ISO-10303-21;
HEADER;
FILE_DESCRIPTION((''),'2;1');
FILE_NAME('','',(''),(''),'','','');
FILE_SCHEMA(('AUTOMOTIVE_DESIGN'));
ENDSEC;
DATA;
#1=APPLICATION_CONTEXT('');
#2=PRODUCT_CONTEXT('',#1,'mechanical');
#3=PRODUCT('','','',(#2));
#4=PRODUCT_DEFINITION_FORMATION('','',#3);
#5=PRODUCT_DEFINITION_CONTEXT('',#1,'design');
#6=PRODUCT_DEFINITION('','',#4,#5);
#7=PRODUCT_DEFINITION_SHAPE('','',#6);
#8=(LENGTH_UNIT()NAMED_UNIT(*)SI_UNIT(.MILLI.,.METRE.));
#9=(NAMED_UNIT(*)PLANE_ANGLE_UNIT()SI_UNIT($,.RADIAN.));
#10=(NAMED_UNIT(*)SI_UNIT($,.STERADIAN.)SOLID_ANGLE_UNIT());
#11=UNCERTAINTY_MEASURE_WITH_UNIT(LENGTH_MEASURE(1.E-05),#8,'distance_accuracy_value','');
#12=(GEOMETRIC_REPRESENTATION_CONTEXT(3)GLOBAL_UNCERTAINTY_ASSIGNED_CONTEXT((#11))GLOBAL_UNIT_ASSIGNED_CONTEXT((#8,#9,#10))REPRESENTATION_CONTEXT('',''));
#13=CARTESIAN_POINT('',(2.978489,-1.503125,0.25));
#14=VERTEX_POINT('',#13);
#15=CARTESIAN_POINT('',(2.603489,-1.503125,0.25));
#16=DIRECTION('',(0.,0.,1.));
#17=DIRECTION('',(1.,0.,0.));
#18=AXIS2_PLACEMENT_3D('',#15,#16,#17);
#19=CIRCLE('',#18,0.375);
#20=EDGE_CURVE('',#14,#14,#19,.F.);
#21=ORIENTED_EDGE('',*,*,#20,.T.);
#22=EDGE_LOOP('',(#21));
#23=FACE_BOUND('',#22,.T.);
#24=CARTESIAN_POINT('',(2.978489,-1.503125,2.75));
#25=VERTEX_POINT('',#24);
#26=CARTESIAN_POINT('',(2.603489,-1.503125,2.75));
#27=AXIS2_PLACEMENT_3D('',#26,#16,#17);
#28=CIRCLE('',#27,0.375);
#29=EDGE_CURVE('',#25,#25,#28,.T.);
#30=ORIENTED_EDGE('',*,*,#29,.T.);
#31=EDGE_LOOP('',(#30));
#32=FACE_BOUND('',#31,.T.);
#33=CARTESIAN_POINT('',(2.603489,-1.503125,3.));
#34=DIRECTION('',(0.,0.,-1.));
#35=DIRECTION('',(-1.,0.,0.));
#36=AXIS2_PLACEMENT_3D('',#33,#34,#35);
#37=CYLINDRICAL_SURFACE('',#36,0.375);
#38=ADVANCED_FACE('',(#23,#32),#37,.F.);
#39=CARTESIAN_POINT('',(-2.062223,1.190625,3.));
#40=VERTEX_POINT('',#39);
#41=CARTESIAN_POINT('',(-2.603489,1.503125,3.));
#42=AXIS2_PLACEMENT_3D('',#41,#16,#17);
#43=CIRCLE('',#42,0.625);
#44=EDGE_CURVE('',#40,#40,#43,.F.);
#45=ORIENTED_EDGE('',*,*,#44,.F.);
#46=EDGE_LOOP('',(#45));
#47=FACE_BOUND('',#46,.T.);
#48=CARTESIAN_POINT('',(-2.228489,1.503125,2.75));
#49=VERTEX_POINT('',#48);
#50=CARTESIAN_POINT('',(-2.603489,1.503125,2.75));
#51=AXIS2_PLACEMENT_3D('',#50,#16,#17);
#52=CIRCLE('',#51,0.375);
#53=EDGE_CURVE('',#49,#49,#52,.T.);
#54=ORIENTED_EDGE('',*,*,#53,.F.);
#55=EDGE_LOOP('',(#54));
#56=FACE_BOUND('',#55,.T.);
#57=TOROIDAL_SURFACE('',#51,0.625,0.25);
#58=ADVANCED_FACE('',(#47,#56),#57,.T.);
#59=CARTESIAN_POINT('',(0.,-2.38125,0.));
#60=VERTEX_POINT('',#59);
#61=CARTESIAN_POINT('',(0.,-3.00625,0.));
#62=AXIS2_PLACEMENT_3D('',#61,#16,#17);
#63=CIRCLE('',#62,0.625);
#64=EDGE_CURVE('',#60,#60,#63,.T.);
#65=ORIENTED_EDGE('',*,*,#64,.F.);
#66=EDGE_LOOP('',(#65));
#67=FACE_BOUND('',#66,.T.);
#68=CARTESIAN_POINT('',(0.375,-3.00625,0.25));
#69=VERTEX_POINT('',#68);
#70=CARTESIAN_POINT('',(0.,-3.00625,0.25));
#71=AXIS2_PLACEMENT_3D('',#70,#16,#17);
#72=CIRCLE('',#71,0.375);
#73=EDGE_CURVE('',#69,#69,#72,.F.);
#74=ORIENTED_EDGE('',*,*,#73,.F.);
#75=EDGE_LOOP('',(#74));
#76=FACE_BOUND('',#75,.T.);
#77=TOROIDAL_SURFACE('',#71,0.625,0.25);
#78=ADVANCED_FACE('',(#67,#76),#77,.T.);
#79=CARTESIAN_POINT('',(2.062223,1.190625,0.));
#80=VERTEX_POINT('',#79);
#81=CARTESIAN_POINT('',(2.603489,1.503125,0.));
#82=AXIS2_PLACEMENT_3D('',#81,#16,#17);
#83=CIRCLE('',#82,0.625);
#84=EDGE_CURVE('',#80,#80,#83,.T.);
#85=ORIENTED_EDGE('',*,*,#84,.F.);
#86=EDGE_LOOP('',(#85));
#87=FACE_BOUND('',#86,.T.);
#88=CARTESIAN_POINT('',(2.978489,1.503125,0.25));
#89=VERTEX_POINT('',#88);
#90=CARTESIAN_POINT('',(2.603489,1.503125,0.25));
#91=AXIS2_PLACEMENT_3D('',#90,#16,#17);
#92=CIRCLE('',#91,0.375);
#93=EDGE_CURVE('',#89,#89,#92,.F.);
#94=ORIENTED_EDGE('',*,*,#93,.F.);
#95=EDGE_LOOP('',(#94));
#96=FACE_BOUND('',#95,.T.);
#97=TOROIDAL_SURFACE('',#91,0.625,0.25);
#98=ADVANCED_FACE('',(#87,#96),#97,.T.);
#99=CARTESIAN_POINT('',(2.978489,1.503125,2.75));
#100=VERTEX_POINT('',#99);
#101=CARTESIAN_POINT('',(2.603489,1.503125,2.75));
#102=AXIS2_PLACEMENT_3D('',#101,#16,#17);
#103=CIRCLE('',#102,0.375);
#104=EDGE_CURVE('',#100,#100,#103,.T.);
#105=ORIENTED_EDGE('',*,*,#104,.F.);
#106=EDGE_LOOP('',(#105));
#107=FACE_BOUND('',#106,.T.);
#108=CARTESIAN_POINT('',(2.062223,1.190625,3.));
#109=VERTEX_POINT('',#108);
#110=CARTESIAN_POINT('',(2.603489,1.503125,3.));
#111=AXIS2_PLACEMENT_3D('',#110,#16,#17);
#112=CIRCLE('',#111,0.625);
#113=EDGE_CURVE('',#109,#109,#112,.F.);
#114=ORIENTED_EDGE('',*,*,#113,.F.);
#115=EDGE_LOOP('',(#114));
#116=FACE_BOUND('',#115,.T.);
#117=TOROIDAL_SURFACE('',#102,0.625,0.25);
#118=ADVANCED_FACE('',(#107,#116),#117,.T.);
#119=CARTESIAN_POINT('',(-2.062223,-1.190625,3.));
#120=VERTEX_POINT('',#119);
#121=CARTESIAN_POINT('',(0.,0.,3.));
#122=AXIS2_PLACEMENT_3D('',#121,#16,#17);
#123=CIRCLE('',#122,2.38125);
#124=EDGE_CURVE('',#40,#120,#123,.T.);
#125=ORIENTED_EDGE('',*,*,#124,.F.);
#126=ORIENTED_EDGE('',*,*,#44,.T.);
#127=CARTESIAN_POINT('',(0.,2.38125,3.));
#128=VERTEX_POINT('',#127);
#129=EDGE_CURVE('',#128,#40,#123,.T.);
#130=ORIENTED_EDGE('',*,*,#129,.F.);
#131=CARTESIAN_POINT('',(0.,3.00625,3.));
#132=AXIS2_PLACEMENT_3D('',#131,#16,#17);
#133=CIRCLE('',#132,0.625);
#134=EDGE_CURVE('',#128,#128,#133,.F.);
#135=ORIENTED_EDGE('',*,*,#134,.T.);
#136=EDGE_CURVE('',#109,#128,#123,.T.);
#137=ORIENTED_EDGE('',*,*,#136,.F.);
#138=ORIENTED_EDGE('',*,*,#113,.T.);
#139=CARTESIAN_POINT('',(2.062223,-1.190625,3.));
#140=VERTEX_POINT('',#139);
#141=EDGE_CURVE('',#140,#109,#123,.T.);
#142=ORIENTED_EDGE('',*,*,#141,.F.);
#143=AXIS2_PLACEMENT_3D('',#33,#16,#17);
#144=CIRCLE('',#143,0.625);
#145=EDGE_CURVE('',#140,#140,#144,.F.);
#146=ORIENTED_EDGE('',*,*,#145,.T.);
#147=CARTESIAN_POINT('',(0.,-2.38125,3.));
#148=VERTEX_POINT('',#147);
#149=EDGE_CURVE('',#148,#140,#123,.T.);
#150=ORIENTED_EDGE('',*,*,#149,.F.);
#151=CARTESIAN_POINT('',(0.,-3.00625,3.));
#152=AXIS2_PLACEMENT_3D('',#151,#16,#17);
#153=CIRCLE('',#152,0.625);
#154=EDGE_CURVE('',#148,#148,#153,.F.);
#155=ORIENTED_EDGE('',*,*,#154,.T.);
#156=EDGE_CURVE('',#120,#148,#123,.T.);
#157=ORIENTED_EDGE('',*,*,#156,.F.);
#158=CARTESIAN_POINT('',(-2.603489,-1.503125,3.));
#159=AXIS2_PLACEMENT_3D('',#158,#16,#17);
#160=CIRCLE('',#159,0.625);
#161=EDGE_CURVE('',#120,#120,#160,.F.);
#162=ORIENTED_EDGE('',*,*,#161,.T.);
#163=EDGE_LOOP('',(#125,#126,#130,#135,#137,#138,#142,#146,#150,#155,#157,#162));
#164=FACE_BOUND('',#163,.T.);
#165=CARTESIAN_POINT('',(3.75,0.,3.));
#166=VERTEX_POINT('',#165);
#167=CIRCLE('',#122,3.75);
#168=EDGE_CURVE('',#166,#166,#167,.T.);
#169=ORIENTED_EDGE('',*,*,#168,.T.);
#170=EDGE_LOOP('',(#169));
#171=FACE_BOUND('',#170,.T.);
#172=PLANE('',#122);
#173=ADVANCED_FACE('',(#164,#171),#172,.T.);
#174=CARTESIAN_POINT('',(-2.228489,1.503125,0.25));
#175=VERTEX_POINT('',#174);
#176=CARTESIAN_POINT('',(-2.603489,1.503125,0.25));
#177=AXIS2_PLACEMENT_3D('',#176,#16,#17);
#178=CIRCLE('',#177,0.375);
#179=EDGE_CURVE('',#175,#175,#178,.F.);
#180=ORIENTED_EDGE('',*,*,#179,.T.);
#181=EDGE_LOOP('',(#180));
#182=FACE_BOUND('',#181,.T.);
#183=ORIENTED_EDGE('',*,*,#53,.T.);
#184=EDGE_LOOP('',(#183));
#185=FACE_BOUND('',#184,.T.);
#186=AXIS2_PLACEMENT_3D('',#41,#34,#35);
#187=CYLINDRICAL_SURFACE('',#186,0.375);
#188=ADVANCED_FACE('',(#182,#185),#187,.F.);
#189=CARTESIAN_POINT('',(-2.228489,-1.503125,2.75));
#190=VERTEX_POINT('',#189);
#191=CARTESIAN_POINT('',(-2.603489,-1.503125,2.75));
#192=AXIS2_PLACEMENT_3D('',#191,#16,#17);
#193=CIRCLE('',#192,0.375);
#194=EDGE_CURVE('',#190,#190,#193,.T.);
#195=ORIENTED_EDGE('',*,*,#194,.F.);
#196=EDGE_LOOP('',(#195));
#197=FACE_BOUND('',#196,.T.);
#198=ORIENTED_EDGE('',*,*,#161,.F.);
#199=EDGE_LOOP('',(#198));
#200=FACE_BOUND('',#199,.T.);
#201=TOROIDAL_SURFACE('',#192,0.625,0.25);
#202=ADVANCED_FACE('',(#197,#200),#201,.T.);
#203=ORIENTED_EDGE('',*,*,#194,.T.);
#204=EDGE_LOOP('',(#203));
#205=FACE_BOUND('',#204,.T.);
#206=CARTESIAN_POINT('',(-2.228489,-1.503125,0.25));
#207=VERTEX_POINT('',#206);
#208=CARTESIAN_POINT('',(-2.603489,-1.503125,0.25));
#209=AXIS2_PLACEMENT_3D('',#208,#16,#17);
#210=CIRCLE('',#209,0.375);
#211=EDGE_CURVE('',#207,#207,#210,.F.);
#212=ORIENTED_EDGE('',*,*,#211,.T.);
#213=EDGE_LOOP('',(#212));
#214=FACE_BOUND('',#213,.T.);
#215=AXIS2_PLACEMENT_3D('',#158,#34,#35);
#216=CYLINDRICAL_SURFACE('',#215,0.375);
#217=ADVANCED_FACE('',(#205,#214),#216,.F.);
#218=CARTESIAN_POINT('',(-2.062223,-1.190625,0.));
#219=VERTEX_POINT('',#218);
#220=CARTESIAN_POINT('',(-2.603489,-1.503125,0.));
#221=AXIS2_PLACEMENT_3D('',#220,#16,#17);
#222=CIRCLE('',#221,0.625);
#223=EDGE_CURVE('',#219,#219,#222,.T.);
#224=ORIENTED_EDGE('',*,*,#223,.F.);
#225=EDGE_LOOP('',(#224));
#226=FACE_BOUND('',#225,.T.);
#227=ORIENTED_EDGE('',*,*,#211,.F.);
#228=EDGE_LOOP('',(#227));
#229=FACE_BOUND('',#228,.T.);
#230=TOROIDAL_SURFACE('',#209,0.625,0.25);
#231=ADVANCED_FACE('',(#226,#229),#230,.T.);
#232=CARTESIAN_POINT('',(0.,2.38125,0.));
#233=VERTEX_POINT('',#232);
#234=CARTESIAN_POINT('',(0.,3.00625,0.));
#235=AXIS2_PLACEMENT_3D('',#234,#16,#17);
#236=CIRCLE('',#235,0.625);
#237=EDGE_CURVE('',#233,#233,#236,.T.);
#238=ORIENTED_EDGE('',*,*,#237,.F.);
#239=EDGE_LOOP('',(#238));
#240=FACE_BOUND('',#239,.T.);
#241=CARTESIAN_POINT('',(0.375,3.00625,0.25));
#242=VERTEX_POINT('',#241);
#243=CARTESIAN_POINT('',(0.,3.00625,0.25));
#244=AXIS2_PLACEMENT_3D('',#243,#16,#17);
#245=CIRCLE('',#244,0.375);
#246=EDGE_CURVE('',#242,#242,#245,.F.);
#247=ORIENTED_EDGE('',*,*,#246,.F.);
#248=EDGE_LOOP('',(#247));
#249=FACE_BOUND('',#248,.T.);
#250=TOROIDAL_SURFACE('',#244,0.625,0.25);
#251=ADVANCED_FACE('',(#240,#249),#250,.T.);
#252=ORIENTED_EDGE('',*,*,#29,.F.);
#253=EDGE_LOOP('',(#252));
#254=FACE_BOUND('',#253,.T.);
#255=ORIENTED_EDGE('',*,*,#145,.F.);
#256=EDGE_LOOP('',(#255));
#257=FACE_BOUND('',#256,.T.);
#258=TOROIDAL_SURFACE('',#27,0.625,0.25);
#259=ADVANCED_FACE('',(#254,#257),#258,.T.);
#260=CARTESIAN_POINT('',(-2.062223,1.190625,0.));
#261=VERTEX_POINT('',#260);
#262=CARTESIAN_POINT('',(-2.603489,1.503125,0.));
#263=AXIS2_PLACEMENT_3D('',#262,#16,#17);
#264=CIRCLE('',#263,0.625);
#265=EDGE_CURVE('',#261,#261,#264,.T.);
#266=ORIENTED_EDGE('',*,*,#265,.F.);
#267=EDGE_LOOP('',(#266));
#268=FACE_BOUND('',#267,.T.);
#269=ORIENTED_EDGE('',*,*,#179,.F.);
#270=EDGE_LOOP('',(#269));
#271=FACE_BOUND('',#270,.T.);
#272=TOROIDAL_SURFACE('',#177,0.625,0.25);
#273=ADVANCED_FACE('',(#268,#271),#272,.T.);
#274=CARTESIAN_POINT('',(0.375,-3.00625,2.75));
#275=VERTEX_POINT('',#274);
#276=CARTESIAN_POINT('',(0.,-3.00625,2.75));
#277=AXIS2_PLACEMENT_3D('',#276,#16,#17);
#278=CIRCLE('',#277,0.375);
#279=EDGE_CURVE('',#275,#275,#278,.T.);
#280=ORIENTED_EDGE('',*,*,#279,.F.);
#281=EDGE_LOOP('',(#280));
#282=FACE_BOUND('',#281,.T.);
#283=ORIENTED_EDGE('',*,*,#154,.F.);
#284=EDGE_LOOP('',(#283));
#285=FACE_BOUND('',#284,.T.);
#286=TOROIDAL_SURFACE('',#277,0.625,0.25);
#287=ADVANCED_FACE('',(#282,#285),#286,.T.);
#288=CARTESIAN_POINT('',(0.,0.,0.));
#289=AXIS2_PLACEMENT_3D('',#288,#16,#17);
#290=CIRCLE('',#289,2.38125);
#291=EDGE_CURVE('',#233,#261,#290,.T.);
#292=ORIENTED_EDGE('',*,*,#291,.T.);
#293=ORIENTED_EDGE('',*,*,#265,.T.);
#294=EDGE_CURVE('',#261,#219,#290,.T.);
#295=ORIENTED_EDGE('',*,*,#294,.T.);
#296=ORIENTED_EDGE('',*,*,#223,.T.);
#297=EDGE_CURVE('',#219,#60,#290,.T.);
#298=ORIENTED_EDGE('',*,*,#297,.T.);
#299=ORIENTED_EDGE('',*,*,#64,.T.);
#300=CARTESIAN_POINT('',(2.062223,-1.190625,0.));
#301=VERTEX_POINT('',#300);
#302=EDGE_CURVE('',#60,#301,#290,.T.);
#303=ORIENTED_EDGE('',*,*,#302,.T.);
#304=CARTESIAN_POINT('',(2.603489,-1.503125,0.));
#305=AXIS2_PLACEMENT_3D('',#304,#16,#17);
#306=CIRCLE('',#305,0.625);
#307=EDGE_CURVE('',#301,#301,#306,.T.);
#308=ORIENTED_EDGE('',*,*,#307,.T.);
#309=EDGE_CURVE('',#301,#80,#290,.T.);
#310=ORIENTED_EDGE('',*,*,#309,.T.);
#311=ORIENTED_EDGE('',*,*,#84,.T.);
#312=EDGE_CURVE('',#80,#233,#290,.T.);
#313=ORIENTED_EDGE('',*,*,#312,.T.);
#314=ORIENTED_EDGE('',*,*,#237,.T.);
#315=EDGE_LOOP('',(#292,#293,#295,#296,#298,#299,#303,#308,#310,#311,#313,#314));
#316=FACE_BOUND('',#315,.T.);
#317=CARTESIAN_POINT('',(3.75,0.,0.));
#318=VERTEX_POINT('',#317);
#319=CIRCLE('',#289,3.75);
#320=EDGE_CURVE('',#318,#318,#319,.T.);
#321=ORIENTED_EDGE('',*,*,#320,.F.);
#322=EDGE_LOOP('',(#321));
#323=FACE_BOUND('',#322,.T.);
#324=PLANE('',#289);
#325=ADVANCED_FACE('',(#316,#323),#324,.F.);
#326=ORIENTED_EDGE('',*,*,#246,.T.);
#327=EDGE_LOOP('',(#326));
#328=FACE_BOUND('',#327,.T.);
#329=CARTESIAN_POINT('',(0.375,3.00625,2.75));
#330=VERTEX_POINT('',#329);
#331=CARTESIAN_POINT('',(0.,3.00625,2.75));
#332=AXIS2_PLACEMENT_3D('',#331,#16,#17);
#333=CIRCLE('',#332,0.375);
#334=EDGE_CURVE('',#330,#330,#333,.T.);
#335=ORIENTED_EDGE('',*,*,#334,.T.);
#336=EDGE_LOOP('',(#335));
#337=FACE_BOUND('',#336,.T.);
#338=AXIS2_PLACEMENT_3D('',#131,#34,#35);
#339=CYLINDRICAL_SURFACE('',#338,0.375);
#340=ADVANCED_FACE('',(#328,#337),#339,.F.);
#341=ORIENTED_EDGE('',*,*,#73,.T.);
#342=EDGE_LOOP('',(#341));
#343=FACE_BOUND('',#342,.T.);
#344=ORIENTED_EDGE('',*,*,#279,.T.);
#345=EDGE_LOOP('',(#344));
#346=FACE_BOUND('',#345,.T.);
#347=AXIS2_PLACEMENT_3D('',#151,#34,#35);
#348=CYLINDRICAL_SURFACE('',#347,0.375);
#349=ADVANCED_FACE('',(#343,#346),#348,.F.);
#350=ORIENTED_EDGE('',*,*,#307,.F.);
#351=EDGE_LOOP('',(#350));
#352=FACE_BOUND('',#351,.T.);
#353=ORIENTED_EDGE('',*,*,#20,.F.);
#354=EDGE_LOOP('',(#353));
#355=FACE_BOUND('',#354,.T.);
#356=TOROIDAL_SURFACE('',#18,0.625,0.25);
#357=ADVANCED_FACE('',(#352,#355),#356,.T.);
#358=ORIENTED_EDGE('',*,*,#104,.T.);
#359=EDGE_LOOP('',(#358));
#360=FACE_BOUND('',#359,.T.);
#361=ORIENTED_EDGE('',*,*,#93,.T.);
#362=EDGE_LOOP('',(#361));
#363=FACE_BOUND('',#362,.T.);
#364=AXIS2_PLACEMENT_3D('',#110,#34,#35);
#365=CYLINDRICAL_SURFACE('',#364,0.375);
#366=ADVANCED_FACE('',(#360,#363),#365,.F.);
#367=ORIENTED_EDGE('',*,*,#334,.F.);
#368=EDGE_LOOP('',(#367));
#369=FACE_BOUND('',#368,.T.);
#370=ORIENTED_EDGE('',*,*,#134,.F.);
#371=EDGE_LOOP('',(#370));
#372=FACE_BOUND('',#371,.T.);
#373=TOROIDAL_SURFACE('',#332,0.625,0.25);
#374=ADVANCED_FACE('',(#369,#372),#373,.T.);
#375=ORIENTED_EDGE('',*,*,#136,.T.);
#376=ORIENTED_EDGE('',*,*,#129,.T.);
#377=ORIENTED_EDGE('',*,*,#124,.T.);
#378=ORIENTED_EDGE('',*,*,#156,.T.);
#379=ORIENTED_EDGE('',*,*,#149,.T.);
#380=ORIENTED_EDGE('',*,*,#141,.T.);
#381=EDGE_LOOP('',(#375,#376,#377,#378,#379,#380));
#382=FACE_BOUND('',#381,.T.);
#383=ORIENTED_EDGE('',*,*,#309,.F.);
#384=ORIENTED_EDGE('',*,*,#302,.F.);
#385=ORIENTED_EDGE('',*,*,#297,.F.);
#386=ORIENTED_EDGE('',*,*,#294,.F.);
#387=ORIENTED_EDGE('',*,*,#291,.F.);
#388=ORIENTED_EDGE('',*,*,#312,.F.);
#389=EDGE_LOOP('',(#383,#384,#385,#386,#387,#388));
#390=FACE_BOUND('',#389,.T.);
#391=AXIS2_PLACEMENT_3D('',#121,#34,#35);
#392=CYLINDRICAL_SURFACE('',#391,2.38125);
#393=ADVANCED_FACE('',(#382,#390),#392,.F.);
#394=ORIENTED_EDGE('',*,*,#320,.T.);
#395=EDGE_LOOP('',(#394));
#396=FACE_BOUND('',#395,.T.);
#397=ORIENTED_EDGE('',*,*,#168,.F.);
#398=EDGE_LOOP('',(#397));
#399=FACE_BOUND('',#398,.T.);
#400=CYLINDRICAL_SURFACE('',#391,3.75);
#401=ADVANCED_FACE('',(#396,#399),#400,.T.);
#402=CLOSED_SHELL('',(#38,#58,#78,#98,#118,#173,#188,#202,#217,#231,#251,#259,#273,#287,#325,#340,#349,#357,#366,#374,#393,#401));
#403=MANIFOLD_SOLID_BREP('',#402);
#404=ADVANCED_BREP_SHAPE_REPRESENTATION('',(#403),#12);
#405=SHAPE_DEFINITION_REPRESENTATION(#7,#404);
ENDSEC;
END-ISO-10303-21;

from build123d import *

# Parameters (mm, degrees)
SKETCH1_R           = 3.75
SKETCH1_R_2         = 2.38125
SKETCH1_R_3         = 0.375
BOSS_EXTRUDE1_DEPTH = 3
FILLET6_R           = 0.25


with BuildPart() as part:
    # Sketch1 → Boss-Extrude1 (new body)
    with BuildSketch(Plane.XY):
        Circle(SKETCH1_R)
        Circle(SKETCH1_R_2, mode=Mode.SUBTRACT)
        with Locations((0, 3.00625)):
            Circle(SKETCH1_R_3, mode=Mode.SUBTRACT)
        with Locations((2.60348887, 1.503125)):
            Circle(SKETCH1_R_3, mode=Mode.SUBTRACT)
        with Locations((2.60348887, -1.503125)):
            Circle(SKETCH1_R_3, mode=Mode.SUBTRACT)
        with Locations((0, -3.00625)):
            Circle(SKETCH1_R_3, mode=Mode.SUBTRACT)
        with Locations((-2.60348887, -1.503125)):
            Circle(SKETCH1_R_3, mode=Mode.SUBTRACT)
        with Locations((-2.60348887, 1.503125)):
            Circle(SKETCH1_R_3, mode=Mode.SUBTRACT)
    extrude(amount=BOSS_EXTRUDE1_DEPTH)

    # Fillet6
    fillet6_edges = [part.edges().sort_by_distance(p)[0] for p in [
        (-0.375, -3.00625, 0),
        (-0.375, -3.00625, 3),
        (2.22848887, 1.503125, 0),
        (2.22848887, 1.503125, 3),
        (2.22848887, -1.503125, 0),
        (2.22848887, -1.503125, 3),
        (-2.97848887, -1.503125, 0),
        (-2.97848887, -1.503125, 3),
        (-2.97848887, 1.503125, 0),
        (-2.97848887, 1.503125, 3),
        (-0.375, 3.00625, 0),
        (-0.375, 3.00625, 3),
    ]]
    fillet(fillet6_edges, radius=FILLET6_R - 0.0001)  # a hair under: the kernel refuses the full size


solid = part.part
